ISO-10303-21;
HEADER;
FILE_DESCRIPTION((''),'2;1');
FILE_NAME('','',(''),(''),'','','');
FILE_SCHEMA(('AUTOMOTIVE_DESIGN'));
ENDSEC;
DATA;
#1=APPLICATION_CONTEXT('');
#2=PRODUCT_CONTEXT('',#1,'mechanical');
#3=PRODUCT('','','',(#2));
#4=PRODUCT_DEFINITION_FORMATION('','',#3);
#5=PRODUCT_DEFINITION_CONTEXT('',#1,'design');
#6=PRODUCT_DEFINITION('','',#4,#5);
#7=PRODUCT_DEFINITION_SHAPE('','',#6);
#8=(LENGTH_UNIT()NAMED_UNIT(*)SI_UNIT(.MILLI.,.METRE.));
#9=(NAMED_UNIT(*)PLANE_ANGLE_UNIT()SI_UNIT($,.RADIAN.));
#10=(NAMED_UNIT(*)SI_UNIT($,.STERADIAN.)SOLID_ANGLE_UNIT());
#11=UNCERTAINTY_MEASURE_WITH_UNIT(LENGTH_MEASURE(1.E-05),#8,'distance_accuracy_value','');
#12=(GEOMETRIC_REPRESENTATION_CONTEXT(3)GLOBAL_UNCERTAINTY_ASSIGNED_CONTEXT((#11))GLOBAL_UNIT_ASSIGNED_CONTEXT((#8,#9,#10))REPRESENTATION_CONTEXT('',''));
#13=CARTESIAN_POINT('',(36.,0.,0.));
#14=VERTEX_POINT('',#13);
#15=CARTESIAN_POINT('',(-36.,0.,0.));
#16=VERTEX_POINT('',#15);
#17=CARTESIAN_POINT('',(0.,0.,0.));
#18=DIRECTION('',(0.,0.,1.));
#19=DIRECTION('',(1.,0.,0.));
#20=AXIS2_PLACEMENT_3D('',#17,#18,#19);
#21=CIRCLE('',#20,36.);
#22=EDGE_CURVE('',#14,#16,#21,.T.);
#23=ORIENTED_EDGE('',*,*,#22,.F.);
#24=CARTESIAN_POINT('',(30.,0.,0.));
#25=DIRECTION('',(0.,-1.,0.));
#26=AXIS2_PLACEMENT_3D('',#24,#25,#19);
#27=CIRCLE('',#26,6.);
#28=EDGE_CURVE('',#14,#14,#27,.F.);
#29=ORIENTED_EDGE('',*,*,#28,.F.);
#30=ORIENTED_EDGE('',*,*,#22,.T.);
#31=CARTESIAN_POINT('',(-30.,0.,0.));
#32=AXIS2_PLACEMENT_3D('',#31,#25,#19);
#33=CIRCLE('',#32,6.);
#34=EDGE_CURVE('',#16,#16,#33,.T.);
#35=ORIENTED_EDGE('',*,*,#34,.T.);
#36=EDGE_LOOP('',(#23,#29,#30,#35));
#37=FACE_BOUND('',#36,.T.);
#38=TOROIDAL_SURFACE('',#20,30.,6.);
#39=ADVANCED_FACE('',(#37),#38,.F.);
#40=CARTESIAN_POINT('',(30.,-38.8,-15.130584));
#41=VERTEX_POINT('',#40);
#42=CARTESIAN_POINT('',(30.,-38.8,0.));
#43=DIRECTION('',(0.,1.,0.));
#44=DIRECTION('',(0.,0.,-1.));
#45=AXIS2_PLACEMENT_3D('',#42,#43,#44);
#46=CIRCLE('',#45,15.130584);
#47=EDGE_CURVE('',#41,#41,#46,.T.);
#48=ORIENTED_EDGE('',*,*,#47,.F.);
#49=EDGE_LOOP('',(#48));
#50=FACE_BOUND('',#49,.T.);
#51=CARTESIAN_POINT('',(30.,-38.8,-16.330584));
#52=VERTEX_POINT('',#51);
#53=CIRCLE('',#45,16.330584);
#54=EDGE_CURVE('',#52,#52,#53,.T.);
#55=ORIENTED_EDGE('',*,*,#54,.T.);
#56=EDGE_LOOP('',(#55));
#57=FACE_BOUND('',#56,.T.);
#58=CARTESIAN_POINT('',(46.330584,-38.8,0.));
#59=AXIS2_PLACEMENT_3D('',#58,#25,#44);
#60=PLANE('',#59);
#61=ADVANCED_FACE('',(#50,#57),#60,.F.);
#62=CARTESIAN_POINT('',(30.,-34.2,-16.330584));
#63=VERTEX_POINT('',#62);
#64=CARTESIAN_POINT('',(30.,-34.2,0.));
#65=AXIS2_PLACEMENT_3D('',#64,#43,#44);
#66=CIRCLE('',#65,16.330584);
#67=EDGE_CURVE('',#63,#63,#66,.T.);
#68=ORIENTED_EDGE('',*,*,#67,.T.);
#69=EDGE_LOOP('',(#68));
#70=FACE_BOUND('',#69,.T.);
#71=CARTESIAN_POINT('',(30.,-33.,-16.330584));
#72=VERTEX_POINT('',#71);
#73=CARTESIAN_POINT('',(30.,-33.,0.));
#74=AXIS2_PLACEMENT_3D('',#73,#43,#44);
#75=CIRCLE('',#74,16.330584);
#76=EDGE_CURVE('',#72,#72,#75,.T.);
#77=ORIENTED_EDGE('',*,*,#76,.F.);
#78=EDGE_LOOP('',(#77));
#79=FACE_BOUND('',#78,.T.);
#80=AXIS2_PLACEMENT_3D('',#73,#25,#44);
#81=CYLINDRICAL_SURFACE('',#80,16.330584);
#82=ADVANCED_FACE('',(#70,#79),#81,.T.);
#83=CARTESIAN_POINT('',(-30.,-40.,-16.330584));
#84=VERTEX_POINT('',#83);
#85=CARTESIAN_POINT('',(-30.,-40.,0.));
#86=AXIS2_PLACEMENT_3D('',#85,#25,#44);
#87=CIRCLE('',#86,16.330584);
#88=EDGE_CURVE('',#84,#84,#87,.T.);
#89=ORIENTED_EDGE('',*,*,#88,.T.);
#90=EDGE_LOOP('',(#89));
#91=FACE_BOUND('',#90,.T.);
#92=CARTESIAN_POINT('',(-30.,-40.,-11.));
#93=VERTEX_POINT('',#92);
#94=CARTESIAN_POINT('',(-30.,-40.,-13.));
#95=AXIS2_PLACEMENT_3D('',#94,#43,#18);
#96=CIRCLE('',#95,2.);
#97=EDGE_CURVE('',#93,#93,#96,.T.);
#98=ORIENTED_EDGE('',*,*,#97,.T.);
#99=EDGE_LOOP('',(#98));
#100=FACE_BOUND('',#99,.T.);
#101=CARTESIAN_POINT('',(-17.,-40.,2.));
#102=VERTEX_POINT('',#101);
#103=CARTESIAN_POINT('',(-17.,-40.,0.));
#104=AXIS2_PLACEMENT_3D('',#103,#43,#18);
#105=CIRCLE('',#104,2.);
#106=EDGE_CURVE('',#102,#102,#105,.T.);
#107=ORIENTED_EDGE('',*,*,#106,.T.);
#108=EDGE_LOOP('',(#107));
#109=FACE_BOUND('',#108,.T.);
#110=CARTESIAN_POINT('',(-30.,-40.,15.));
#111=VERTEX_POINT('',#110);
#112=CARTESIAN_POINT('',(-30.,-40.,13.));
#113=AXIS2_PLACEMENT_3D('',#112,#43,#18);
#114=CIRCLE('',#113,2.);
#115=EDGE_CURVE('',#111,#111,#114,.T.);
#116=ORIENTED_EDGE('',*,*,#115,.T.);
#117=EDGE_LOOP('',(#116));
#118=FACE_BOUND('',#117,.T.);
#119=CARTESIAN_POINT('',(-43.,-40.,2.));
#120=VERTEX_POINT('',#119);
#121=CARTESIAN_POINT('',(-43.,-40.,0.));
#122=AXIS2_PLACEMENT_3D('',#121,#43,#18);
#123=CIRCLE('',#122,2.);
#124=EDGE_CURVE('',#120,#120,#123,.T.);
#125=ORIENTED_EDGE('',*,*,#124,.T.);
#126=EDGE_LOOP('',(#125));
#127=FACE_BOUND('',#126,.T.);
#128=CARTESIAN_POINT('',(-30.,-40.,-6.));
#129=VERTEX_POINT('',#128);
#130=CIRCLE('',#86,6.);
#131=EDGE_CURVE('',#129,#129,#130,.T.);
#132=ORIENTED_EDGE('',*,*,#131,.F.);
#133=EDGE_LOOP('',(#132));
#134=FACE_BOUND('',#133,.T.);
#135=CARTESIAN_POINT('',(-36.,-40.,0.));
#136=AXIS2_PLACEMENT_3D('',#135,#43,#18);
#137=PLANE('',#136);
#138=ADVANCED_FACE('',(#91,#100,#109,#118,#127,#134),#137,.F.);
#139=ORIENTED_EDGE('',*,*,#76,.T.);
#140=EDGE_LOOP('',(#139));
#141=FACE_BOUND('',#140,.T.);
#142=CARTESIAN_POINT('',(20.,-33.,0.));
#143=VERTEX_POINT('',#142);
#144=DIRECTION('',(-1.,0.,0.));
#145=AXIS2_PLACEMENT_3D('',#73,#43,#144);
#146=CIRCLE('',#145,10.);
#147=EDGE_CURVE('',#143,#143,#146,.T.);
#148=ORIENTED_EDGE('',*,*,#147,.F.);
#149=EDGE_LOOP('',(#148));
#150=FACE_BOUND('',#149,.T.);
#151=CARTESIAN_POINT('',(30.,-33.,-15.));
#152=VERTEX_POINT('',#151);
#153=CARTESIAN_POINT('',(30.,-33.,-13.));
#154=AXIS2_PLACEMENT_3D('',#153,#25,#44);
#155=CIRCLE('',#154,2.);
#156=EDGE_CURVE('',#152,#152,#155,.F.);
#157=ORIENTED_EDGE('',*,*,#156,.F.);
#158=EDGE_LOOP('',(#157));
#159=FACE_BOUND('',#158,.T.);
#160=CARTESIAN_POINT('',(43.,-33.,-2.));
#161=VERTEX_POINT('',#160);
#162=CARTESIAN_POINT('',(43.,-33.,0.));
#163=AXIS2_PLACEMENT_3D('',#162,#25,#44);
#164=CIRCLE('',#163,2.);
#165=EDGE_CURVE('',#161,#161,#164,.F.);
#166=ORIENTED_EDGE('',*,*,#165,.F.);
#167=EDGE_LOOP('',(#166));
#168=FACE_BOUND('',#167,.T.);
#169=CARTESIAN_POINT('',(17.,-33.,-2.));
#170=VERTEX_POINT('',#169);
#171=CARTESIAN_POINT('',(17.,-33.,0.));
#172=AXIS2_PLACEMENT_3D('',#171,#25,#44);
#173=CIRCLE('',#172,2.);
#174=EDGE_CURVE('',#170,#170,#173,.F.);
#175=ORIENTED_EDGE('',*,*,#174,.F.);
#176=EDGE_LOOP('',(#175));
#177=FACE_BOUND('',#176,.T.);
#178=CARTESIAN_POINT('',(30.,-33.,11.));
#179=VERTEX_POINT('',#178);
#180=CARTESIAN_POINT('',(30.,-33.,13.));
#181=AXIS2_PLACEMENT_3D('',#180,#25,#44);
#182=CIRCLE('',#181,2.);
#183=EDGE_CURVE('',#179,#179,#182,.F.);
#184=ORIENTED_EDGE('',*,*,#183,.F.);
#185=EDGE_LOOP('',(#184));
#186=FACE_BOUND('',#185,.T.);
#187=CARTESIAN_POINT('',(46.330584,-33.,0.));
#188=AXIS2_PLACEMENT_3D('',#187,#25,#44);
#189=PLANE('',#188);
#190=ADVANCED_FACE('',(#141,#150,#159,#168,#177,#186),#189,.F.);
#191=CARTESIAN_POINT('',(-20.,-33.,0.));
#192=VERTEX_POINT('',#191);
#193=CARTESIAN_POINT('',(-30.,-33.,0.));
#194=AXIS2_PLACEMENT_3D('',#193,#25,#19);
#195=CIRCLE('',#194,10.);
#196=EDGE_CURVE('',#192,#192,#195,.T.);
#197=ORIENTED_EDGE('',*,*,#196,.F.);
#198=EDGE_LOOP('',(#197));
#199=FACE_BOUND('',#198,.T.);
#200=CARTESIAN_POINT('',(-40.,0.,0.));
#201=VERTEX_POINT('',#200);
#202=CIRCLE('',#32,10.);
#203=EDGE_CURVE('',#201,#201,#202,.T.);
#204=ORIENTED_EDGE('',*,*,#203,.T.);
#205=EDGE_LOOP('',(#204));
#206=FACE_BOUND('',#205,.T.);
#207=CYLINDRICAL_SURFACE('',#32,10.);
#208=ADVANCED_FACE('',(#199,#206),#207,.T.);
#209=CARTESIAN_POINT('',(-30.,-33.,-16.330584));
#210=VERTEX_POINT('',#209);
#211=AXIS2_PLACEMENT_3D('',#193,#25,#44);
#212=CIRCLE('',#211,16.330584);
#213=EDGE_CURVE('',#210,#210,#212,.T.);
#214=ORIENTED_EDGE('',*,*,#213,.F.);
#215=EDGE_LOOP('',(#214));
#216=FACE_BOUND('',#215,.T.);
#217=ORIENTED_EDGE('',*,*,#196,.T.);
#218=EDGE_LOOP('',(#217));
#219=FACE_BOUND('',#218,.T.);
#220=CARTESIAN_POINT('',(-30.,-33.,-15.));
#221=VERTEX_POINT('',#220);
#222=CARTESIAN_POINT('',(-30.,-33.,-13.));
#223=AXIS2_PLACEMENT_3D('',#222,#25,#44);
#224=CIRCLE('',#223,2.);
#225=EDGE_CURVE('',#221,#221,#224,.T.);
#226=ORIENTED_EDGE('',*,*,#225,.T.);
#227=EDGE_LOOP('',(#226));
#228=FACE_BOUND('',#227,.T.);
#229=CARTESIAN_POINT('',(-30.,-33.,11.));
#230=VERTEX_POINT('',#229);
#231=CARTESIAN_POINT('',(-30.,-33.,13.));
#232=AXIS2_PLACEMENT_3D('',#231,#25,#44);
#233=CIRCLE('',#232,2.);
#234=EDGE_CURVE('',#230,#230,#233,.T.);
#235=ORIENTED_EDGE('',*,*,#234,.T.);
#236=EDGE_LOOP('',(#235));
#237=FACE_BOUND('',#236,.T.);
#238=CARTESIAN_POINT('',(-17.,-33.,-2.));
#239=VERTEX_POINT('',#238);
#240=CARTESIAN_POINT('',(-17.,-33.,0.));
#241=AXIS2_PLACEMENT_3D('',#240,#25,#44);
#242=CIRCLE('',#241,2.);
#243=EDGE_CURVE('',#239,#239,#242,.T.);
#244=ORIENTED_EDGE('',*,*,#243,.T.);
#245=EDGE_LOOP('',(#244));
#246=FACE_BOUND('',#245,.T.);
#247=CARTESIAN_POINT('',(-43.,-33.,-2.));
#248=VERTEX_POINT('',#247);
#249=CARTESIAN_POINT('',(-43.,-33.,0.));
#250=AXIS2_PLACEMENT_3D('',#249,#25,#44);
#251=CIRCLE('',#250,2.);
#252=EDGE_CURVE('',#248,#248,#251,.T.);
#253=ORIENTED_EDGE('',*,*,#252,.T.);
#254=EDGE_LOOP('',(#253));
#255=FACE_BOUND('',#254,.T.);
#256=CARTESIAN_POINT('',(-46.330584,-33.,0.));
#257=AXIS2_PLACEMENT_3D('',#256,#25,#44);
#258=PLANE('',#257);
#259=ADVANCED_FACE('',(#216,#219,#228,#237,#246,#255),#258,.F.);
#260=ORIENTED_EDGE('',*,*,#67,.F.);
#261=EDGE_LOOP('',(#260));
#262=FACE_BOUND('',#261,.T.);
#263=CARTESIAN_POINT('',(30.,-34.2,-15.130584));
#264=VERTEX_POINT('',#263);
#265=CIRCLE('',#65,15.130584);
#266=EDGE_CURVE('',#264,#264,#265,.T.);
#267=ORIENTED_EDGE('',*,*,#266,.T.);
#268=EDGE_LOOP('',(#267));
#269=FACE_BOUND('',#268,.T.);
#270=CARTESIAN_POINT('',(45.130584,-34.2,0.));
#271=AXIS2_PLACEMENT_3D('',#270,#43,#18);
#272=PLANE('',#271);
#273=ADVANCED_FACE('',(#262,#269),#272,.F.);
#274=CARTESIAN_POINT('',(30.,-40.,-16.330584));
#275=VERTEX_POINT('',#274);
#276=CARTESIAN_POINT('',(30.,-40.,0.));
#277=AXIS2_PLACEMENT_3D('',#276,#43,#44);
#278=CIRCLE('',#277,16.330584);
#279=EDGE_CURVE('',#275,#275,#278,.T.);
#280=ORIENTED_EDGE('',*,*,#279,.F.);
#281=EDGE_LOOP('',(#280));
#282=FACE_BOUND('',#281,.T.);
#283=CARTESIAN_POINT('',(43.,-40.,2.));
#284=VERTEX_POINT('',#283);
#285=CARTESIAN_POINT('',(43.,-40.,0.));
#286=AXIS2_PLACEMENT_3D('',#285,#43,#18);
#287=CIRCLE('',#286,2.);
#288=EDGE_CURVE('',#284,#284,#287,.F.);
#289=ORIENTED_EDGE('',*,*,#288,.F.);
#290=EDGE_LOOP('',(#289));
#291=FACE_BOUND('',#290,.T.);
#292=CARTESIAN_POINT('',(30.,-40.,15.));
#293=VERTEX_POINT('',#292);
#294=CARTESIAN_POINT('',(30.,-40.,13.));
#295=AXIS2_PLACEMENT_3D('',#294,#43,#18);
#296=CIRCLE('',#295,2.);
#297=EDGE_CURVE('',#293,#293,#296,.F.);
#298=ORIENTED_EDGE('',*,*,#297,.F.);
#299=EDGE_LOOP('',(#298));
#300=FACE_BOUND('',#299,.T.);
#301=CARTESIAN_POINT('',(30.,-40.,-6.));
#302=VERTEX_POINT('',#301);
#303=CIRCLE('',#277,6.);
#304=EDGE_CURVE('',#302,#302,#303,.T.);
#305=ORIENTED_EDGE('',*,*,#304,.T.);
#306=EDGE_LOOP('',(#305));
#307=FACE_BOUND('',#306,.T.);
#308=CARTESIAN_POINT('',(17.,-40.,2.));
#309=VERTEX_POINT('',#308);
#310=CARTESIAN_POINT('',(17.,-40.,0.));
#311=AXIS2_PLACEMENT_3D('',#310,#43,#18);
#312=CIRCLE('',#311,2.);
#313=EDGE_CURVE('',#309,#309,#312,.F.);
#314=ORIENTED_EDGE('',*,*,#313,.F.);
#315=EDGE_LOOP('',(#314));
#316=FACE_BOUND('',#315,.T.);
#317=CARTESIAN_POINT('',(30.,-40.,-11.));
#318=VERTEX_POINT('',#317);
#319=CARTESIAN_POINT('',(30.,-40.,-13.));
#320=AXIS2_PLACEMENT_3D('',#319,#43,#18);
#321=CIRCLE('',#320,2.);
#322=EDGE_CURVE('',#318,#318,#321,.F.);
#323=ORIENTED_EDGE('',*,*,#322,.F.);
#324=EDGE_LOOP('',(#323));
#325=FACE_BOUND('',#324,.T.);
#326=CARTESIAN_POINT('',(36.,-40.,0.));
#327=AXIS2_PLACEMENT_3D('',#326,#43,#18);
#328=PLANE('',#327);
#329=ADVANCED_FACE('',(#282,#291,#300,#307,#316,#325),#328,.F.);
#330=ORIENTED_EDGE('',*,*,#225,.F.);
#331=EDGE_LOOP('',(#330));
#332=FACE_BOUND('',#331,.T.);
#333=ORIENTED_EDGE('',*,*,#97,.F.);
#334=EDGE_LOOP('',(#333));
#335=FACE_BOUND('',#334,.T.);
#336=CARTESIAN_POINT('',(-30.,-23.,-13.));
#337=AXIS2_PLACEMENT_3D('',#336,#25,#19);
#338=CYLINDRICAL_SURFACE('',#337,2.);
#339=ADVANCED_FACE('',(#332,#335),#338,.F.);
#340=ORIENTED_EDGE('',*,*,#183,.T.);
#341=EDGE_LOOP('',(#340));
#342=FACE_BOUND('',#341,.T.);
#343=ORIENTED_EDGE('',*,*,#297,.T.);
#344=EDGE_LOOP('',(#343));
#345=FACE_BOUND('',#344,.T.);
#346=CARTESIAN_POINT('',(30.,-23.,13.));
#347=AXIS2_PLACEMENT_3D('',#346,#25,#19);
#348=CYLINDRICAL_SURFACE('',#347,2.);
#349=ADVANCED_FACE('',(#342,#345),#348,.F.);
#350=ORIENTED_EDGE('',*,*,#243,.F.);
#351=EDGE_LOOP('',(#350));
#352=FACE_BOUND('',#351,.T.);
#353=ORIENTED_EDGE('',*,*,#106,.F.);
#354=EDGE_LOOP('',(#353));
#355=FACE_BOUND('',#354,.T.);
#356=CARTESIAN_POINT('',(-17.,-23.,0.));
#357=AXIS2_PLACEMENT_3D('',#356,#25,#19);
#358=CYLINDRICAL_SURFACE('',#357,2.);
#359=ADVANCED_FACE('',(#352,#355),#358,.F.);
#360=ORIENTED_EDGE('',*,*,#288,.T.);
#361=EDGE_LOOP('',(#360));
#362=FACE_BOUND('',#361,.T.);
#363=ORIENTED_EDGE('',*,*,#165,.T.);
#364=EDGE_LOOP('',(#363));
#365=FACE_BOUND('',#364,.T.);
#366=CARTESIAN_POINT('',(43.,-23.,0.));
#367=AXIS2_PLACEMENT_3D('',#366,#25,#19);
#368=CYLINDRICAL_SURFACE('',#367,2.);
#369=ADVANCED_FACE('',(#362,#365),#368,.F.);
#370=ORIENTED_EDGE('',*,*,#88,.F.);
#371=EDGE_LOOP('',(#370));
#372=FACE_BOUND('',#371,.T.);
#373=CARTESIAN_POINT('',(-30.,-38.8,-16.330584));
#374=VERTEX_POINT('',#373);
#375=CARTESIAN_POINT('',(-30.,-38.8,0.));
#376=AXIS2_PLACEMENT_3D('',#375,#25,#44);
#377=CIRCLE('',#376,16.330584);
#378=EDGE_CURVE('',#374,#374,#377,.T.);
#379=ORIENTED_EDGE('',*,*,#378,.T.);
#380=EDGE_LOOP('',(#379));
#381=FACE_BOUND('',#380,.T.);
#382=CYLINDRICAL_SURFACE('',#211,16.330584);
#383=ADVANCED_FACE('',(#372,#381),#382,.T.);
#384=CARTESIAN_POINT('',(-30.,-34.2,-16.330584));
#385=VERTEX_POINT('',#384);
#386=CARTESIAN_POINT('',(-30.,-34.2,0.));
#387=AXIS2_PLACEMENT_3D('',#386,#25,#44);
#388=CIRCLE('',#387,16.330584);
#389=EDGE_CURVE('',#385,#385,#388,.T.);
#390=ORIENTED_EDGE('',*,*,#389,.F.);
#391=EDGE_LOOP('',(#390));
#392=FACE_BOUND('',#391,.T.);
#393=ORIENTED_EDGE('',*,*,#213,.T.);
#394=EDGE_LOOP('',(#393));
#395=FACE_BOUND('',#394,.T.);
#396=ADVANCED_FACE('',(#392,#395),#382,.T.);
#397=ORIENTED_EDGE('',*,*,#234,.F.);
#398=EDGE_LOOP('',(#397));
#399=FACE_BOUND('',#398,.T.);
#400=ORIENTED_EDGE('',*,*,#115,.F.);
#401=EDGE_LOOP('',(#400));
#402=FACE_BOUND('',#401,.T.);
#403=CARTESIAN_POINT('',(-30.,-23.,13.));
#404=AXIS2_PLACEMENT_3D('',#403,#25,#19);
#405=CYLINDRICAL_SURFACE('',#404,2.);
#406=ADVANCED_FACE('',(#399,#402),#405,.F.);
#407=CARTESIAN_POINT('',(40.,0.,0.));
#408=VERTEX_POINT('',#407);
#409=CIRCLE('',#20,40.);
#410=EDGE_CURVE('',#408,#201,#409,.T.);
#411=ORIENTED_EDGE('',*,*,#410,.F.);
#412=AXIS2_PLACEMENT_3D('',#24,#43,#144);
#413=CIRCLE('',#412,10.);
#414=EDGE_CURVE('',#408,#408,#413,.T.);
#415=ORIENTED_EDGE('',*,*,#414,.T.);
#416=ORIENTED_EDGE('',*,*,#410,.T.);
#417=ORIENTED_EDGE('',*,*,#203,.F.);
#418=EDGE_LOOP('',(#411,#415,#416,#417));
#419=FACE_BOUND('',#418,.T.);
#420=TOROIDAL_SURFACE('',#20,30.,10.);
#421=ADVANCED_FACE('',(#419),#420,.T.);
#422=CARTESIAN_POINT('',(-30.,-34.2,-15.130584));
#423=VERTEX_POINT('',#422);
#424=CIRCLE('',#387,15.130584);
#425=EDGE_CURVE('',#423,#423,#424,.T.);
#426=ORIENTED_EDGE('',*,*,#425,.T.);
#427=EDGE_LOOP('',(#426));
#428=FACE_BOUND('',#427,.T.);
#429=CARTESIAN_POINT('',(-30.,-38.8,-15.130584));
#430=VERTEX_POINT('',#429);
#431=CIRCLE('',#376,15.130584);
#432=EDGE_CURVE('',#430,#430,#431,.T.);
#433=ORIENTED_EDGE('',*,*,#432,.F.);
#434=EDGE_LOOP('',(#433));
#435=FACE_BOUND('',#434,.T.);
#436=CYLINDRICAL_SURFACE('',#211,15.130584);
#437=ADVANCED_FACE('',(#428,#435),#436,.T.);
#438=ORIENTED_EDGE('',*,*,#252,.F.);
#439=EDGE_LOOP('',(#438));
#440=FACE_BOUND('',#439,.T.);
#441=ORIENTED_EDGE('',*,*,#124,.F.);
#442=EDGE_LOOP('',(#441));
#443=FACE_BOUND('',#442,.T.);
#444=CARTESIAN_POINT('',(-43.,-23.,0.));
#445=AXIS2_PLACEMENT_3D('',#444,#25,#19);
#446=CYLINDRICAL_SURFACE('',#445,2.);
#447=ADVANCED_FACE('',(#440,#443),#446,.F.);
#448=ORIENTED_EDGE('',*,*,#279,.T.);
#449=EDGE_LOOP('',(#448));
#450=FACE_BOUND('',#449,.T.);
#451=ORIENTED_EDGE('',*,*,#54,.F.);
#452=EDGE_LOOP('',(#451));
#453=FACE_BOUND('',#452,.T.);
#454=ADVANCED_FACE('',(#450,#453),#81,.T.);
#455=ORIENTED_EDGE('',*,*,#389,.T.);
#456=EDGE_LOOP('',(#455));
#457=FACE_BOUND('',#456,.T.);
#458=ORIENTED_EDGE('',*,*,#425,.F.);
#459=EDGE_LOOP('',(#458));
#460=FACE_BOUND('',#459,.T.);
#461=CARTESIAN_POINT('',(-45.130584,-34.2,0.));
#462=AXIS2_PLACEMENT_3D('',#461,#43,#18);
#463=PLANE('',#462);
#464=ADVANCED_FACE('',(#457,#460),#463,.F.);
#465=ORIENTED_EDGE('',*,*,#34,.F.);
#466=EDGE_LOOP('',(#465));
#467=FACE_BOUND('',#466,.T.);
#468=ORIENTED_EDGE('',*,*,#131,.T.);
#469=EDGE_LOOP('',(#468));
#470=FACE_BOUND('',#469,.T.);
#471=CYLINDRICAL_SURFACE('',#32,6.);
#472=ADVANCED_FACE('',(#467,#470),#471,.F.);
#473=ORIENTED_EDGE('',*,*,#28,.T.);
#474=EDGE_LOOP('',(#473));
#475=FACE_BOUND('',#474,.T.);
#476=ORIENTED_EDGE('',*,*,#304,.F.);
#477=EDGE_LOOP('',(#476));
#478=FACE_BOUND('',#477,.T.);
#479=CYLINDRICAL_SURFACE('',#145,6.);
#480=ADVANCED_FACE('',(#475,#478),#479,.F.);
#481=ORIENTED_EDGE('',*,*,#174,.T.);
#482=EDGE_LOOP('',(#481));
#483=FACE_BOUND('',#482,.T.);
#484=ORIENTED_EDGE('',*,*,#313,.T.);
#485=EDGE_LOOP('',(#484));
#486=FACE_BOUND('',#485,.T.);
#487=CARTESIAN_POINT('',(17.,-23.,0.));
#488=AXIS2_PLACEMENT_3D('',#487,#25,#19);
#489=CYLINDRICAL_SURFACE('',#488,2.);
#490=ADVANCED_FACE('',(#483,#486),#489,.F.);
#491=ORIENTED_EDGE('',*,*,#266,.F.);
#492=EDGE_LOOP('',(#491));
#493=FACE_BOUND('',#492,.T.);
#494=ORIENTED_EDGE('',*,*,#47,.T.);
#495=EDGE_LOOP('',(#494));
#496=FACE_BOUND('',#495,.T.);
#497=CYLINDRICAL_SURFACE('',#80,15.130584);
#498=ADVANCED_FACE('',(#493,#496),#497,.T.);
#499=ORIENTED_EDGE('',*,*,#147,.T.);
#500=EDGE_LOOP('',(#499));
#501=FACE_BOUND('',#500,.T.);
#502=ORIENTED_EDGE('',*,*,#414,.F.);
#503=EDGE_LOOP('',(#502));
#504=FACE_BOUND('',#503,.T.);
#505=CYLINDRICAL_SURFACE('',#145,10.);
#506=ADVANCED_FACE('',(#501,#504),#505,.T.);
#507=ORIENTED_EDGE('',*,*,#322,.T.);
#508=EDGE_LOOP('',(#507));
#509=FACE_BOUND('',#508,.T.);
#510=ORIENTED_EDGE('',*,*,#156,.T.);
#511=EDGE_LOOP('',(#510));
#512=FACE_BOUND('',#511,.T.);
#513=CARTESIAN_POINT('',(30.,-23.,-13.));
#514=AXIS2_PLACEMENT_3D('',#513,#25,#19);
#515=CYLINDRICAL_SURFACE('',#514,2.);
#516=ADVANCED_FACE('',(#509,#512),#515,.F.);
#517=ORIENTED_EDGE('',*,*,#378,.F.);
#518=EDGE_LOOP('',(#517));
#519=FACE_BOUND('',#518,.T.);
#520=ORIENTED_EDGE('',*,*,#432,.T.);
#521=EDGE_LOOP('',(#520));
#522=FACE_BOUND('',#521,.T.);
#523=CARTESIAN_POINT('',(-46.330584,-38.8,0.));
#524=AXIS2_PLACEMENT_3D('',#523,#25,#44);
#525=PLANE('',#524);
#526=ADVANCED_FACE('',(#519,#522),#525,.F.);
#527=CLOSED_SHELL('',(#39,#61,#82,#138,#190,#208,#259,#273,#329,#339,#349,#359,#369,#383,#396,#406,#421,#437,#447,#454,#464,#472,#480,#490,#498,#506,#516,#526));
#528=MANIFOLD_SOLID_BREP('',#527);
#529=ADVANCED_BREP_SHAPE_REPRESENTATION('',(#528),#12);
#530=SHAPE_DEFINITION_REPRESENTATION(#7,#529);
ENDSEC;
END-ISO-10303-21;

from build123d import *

# Parameters (mm, degrees)
SKETCH2_R          = 10
SHELL1_T           = -4
SKETCH8_R          = 2
CUT_EXTRUDE2_DEPTH = 10


with BuildPart() as part:
    # Sweep1: sweep along a path in Sketch1
    with BuildLine(Plane.XY) as sweep1_path:
        Line((-30, -33), (-30, 0))
        ThreePointArc((-30, 0), (0, 30), (30, 0))
        Line((30, 0), (30, -33))
    # Sketch2 → Sweep1 (sweep)
    with BuildSketch(Plane(origin=(-30, -33, 0), x_dir=(-1, 0, 0), z_dir=(0, -1, 0))):
        Circle(SKETCH2_R)
    sweep(path=sweep1_path.line)

    # Shell1
    shell1_openings = [part.faces().sort_by_distance(p)[0] for p in [
        (30, -33, 0),
        (-30, -33, 0),
    ]]
    offset(amount=SHELL1_T, openings=shell1_openings, kind=Kind.INTERSECTION)

    # Sketch6 → Revolve1 (revolve)
    with BuildSketch(Plane.XY):
        Polygon((-36, -33), (-36, -40), (-46.330583968, -40), (-46.330583968, -38.8), (-45.130583968, -38.8), (-45.130583968, -34.2), (-46.330583968, -34.2), (-46.330583968, -33), align=None)
    revolve1 = revolve(axis=Axis((-30, -33, 0), (0, 1, 0)))

    # Sketch8 → Cut-Extrude2 (cut, symmetric)
    with BuildSketch(Plane(origin=(-30, -33, 0), x_dir=(-1, 0, 0), z_dir=(0, -1, 0))):
        with Locations((0, -13)):
            Circle(SKETCH8_R)
        with Locations((-13, 0)):
            Circle(SKETCH8_R)
        with Locations((0, 13)):
            Circle(SKETCH8_R)
        with Locations((13, 0)):
            Circle(SKETCH8_R)
    cut_extrude2 = extrude(amount=CUT_EXTRUDE2_DEPTH, both=True, mode=Mode.SUBTRACT)

    # Mirror3: Revolve1, Cut-Extrude2 across plane
    add(revolve1.mirror(Plane(origin=(0, 0, 0), x_dir=(0, 0, 1), z_dir=(1, 0, 0))))
    add(cut_extrude2.mirror(Plane(origin=(0, 0, 0), x_dir=(0, 0, 1), z_dir=(1, 0, 0))), mode=Mode.SUBTRACT)


solid = part.part
